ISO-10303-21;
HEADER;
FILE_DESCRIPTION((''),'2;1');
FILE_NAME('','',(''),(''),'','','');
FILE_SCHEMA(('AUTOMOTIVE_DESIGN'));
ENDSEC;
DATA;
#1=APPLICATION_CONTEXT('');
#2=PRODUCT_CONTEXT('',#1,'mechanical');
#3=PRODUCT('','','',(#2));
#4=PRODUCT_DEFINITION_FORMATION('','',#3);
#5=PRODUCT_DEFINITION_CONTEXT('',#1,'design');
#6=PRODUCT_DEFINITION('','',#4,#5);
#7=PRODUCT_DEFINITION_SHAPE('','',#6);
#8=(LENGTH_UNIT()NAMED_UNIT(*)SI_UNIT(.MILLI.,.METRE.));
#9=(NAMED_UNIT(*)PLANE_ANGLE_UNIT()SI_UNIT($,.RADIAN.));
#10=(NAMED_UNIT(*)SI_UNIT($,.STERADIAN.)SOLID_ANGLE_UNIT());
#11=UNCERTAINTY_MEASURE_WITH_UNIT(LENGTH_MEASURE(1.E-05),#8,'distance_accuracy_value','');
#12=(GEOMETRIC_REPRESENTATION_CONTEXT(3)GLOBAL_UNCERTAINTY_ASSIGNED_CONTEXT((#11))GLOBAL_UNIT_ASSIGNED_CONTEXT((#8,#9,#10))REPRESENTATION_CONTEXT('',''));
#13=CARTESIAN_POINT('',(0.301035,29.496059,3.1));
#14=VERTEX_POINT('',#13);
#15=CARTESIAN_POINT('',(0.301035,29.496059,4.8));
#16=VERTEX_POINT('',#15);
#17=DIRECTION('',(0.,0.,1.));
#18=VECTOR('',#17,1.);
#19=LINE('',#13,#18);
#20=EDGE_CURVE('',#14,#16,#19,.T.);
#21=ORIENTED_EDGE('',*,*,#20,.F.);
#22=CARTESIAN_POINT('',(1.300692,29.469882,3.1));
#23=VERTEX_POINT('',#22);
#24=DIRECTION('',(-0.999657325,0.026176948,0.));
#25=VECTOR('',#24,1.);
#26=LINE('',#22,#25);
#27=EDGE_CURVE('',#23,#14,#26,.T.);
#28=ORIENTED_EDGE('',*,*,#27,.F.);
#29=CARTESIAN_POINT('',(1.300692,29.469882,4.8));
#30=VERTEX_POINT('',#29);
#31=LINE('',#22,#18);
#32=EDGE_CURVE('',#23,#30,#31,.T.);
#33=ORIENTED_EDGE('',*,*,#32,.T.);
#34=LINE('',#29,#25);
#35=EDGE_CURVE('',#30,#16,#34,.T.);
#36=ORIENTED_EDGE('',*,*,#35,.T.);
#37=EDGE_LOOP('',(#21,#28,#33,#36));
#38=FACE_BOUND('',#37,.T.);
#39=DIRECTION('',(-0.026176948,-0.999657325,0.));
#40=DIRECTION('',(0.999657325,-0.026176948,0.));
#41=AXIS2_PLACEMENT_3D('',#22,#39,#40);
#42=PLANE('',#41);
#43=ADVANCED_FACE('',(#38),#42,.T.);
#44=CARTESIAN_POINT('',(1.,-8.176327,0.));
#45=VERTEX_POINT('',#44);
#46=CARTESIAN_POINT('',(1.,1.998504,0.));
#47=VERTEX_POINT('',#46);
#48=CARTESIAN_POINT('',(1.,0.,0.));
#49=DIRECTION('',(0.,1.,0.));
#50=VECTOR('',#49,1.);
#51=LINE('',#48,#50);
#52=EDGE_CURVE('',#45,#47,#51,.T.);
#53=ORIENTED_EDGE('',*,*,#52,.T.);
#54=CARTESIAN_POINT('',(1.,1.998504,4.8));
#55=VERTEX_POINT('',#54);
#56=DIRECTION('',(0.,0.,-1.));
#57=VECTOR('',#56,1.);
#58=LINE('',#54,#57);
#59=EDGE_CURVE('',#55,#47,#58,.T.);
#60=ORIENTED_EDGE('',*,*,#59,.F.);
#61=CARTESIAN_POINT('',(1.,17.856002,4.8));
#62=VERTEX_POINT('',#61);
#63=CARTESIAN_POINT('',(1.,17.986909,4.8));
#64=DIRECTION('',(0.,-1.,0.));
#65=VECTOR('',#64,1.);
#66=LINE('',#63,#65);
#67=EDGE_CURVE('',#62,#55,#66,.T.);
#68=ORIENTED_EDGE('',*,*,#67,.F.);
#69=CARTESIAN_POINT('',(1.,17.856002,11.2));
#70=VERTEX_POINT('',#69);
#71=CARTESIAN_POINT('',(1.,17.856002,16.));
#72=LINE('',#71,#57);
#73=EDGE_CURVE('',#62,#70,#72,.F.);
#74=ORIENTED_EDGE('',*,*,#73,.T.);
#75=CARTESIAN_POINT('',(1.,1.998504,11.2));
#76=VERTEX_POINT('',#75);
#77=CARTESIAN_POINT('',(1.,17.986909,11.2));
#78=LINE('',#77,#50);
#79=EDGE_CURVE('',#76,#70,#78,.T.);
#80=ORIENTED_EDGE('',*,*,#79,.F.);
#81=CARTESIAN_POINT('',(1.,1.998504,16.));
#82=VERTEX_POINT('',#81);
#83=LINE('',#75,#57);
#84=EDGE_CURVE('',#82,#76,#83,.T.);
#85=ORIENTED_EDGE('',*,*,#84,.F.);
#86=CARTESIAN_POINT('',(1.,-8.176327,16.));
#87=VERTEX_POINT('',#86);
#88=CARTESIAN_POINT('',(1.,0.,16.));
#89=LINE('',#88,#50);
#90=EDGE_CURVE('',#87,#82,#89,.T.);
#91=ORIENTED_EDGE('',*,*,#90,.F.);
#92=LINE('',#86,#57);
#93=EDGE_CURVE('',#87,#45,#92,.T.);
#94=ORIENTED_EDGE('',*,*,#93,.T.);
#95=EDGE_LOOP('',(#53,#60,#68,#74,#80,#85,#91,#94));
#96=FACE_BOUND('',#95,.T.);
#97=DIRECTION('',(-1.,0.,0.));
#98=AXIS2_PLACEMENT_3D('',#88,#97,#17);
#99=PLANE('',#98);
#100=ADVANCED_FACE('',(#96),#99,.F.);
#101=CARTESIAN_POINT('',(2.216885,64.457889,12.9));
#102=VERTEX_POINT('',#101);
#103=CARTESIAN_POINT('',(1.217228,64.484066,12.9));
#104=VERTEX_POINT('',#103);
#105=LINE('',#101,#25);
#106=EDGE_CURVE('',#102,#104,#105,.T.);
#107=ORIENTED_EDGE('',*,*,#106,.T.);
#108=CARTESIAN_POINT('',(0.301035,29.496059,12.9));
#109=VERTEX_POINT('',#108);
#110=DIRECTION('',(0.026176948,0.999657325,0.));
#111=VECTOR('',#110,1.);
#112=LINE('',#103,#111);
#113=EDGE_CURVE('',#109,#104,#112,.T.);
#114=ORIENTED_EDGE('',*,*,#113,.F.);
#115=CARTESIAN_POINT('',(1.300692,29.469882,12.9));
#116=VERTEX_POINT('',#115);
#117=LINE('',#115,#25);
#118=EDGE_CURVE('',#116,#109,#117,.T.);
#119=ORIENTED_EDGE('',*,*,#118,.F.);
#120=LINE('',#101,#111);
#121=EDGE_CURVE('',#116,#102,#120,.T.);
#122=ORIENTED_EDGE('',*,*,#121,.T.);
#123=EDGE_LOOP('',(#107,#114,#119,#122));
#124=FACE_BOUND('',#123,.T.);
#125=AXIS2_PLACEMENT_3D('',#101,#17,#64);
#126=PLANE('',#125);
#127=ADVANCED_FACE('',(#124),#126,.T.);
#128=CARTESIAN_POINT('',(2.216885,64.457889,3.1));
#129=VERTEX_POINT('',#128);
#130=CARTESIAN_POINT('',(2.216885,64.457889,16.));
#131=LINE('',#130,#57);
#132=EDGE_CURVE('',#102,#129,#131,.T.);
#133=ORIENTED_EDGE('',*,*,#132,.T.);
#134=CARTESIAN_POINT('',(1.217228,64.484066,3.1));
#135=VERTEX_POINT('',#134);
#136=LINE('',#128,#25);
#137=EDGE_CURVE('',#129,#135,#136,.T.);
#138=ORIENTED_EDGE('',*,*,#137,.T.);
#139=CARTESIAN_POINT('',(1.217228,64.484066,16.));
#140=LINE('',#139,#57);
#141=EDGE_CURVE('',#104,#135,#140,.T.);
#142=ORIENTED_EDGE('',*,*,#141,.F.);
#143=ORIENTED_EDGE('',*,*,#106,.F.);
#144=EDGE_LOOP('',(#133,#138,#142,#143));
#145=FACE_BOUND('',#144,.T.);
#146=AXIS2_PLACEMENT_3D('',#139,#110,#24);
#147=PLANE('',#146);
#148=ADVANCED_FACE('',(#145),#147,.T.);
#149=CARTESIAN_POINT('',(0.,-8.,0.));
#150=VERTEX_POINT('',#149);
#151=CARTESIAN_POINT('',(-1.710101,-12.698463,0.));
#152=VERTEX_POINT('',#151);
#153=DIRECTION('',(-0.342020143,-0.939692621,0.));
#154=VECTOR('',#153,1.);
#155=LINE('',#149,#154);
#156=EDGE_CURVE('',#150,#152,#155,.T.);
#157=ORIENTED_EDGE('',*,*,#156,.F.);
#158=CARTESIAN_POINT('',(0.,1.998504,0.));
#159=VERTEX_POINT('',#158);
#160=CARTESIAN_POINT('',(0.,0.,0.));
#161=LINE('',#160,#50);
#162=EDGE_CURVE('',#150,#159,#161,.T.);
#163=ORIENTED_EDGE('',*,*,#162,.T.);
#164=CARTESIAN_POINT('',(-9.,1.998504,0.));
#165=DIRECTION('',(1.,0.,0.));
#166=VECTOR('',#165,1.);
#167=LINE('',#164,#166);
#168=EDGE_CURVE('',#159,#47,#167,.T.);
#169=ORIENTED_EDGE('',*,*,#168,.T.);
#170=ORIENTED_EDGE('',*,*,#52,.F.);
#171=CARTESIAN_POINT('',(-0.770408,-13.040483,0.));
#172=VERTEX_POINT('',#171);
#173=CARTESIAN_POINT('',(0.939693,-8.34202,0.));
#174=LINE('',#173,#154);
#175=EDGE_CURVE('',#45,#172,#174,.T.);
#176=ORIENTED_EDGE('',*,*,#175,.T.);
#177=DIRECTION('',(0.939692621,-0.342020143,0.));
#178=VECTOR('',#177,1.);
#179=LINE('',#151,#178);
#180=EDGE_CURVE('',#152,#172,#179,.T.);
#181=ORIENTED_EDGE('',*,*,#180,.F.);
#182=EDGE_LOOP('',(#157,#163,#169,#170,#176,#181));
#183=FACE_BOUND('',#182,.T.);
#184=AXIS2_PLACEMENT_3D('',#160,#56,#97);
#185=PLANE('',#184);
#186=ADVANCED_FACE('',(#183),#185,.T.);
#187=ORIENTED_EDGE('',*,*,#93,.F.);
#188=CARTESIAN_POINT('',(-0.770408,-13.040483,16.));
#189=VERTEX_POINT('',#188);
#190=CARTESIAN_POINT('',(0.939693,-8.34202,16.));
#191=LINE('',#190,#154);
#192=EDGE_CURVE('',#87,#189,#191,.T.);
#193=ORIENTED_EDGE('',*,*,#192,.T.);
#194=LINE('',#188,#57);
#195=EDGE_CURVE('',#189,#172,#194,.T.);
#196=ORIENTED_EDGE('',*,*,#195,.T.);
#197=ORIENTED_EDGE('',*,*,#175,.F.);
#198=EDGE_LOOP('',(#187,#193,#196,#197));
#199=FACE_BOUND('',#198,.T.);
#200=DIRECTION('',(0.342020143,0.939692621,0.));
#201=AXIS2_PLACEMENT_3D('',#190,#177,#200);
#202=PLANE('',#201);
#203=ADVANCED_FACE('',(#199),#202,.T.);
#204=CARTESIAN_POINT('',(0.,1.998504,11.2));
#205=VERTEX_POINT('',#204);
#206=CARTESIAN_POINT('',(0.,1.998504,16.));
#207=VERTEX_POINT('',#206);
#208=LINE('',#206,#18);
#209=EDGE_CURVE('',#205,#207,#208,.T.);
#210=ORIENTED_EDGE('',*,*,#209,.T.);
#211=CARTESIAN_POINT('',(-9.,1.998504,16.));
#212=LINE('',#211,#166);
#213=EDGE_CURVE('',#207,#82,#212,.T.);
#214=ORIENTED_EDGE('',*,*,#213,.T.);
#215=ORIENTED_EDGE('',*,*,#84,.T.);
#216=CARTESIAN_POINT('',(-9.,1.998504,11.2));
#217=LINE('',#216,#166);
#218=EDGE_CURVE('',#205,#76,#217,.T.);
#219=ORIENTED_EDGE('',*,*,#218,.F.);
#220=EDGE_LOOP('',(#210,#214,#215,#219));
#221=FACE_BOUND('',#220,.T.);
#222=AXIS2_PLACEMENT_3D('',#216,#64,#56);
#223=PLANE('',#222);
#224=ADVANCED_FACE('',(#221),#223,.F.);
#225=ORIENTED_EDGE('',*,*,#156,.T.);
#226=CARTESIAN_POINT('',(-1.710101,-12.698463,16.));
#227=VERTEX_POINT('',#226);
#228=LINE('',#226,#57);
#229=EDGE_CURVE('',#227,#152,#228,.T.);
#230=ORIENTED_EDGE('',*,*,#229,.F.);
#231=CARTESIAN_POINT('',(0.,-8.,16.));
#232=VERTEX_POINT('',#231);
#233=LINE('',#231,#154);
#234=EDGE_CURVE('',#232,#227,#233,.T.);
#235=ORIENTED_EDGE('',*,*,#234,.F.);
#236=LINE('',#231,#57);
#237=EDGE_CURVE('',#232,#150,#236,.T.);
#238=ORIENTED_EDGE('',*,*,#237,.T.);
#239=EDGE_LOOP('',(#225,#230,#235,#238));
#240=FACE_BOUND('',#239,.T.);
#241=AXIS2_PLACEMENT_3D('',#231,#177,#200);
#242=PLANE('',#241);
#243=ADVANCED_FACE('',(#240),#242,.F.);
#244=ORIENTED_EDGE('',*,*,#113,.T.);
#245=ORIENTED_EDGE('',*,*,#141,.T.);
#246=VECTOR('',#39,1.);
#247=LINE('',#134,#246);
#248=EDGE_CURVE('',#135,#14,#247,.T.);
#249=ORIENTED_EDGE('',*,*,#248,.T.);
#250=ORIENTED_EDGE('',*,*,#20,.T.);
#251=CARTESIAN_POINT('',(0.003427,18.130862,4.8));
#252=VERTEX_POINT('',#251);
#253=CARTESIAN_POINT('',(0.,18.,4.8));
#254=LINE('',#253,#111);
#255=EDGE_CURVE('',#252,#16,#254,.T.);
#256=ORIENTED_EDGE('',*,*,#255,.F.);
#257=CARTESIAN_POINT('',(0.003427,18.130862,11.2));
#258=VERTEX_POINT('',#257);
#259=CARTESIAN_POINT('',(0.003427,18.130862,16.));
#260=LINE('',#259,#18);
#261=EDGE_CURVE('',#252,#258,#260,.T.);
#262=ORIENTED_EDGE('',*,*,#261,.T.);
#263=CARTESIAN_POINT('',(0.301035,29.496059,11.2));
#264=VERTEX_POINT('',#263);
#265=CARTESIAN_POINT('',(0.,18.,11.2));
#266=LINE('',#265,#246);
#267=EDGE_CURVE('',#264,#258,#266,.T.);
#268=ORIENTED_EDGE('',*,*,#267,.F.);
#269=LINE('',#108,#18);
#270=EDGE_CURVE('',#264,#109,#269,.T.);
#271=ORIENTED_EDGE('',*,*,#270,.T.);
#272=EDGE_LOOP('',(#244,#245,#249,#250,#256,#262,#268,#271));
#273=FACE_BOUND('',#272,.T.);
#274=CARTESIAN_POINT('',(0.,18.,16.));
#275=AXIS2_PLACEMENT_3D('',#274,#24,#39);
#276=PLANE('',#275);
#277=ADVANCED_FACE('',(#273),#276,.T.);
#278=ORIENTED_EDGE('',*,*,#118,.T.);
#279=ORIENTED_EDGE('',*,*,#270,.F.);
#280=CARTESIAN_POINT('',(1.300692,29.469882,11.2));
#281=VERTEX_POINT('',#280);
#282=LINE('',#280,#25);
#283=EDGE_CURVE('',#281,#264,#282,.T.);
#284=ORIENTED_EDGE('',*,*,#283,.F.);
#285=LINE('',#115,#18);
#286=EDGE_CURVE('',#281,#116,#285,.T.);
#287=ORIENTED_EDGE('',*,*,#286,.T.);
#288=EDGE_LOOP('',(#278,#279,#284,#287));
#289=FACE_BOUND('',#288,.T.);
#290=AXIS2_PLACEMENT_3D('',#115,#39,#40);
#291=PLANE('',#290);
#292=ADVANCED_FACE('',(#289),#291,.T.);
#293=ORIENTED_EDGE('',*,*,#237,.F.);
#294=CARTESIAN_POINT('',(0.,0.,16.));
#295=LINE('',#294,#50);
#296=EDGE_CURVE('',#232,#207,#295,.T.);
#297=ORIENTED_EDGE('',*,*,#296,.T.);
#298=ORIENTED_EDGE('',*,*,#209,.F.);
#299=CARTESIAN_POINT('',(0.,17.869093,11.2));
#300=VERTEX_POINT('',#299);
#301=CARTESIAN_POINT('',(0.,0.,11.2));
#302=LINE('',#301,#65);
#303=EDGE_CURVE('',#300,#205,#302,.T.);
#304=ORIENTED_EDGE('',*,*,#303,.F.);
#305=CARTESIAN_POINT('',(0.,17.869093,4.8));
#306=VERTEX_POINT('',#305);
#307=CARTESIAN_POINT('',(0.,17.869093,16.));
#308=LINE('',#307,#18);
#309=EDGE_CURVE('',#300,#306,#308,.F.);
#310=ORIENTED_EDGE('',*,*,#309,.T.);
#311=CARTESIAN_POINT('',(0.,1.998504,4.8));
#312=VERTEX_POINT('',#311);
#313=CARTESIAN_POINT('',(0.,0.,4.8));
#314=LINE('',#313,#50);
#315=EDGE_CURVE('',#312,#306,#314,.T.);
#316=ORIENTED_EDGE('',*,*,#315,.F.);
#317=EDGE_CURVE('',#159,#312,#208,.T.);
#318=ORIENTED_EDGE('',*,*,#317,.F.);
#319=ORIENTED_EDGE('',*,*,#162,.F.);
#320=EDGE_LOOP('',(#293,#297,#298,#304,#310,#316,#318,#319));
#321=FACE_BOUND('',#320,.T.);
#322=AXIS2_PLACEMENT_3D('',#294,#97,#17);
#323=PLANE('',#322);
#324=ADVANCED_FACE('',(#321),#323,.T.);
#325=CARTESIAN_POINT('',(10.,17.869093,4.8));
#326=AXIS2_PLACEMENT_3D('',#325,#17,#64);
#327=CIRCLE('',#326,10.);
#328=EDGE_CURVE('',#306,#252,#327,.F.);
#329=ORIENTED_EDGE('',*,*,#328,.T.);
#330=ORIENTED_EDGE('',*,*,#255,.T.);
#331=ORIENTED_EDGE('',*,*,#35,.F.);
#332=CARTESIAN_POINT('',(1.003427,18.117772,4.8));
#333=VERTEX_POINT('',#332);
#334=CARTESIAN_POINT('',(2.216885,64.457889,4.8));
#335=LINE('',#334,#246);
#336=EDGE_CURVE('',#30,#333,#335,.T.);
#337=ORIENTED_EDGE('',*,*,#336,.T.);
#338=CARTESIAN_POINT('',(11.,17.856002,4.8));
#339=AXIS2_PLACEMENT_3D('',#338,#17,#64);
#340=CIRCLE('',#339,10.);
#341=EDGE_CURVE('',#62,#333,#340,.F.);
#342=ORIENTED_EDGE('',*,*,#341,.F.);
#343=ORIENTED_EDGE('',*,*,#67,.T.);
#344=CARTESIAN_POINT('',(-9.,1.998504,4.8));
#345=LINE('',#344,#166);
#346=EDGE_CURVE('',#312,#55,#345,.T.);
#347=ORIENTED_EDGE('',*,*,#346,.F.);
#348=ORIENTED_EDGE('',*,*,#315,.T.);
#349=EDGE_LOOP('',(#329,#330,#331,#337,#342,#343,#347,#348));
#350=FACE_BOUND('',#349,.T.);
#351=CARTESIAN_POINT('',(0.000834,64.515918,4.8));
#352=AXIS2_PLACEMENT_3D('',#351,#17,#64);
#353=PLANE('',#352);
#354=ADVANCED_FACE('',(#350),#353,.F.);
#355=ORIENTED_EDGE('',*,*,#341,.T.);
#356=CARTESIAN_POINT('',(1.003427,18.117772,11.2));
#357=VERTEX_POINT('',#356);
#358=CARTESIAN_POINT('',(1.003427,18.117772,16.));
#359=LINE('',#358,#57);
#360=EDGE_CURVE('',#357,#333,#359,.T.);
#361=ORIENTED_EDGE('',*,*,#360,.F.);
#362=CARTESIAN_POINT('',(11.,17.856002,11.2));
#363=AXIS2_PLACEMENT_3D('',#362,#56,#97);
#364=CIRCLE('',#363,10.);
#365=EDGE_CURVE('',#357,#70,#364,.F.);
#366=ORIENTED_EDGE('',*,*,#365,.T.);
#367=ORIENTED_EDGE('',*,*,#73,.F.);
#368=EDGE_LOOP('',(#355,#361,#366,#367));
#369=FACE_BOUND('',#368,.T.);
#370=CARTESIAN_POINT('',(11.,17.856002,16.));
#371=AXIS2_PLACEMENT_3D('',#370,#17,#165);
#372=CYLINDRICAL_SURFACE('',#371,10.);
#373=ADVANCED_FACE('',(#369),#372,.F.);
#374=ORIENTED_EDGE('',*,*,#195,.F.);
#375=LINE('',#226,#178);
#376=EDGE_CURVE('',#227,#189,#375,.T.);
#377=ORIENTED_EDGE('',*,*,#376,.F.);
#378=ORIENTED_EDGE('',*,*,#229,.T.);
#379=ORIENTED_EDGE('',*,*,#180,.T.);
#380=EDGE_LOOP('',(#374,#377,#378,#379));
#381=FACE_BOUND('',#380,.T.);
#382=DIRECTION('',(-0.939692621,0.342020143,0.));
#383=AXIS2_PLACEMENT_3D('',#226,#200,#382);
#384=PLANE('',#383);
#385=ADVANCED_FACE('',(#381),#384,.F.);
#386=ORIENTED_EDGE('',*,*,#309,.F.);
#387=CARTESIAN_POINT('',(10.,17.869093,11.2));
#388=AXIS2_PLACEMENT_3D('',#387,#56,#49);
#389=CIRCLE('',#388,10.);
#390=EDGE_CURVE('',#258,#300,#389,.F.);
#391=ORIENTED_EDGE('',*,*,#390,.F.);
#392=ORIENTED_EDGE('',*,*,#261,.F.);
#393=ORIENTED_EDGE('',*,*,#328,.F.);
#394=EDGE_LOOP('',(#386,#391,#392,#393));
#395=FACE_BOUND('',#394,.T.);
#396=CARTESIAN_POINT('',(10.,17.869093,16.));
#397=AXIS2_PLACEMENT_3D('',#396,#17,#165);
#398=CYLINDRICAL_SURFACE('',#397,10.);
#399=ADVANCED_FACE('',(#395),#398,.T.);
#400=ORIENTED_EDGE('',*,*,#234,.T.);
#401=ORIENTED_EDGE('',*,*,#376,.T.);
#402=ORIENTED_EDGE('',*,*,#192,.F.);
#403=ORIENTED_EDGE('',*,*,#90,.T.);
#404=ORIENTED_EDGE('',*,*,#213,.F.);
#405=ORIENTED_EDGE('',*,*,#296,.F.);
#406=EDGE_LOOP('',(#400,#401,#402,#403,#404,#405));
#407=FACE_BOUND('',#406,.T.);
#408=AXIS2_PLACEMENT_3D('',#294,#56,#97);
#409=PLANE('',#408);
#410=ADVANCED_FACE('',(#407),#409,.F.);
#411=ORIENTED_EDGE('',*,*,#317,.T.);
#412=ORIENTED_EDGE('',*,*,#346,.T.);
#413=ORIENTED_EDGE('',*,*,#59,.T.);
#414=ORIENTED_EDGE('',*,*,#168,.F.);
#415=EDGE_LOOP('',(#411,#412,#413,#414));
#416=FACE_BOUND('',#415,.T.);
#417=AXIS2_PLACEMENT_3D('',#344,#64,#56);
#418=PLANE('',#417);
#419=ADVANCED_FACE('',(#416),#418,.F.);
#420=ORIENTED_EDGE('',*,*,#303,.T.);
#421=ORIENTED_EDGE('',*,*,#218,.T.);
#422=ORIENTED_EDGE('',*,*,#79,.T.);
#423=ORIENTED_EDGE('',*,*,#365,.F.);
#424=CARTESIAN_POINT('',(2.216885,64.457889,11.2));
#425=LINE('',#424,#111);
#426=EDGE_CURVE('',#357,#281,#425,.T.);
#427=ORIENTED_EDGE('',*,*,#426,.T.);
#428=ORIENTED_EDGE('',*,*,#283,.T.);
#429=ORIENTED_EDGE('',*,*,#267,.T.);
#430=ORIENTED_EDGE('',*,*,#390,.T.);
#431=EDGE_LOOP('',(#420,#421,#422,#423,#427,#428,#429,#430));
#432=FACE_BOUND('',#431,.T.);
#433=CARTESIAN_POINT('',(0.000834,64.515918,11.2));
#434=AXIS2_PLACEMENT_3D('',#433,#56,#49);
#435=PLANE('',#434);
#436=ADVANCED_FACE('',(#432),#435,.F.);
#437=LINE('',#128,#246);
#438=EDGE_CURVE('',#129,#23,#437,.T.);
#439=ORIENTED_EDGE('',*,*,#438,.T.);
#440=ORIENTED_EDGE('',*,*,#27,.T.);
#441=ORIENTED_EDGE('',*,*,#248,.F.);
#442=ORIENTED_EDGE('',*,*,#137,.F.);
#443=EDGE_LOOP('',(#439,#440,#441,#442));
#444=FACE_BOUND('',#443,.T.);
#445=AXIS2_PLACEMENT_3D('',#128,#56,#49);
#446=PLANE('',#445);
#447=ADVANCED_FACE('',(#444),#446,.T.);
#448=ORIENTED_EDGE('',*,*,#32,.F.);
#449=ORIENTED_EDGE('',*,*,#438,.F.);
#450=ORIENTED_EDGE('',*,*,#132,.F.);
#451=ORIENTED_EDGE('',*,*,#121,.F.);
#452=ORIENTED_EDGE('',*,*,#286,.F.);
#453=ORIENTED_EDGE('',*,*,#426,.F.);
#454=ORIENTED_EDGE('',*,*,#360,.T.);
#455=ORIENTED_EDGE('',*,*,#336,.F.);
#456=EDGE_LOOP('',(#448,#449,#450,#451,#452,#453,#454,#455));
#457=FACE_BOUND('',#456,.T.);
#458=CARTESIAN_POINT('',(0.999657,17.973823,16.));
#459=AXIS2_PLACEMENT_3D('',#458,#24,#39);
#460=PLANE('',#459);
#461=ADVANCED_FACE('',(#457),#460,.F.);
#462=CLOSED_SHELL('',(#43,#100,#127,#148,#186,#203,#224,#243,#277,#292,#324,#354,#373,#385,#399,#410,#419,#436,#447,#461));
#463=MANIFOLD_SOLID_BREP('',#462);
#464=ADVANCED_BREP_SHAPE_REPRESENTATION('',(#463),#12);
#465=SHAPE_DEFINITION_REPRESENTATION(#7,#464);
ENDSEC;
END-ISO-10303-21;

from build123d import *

# Parameters (mm, degrees)
EXTRUDE_2_DEPTH      = 16
SKETCH_31_W          = 4.8
SKETCH_31_H          = 46.486909283
CUT_EXTRUDE_6_DEPTH  = 67.474283586
SKETCH_32_W          = 4.8
SKETCH_32_H          = 14.308405558
CUT_EXTRUDE_7_DEPTH  = 16
FILLET_1_R           = 10
FILLET_2_R           = 10
SKETCH_39_W          = 1.7
SKETCH_39_H          = 35
EXTRUDE_1_DEPTH      = 1
SKETCH_40_W          = 1
SKETCH_40_H          = 4.8
CUT_EXTRUDE_8_DEPTH  = 10
SKETCH_41_W          = 3.264842031
SKETCH_41_H          = 6.457557915
CUT_EXTRUDE_9_DEPTH  = 10
SKETCH_42_W          = 4.8
SKETCH_42_H          = 1.68
CUT_EXTRUDE_10_DEPTH = 10
EXTRUDE_3_DEPTH      = 16


with BuildPart() as part:
    # 草图28 → 拉伸-薄壁2 (new body)
    with BuildSketch(Plane.XY):
        Polygon((0, 0), (0, 18), (1.217228096, 64.484065611), (2.216885421, 64.457888663), (1, 17.986909283), (1, 0), align=None)
    extrude(amount=EXTRUDE_2_DEPTH)

    # 草图31 → 切除-拉伸6 (cut, through all)
    with BuildSketch(Plane(origin=(0.528633719, -0.013842761, 0), x_dir=(0, 0, -1), z_dir=(0.9996573249755574, -0.02617694830787331, 0))):
        with Locations((-13.6, 41.250377209)):
            Rectangle(SKETCH_31_W, SKETCH_31_H)
        with Locations((-2.4, 41.250377209)):
            Rectangle(SKETCH_31_W, SKETCH_31_H)
    extrude(amount=-CUT_EXTRUDE_6_DEPTH, mode=Mode.SUBTRACT)

    # 草图32 → 切除-拉伸7 (cut)
    with BuildSketch(Plane(origin=(1, 0, 0), x_dir=(0, 0, -1), z_dir=(1, 0, 0))):
        with Locations((-13.6, 10.832706504)):
            Rectangle(SKETCH_32_W, SKETCH_32_H)
        with Locations((-2.4, 10.832706504)):
            Rectangle(SKETCH_32_W, SKETCH_32_H)
    extrude(amount=-CUT_EXTRUDE_7_DEPTH, mode=Mode.SUBTRACT)

    # 圆角1
    # the kernel refuses this fillet: 10 mm, written as the material it takes off along each edge
    with BuildSketch(Plane(origin=(0, 18, -0.327267927), x_dir=(0, -1, 0), z_dir=(0, 0, 1))) as fillet_1_piece_1:
        with BuildLine():
            CenterArc((FILLET_1_R * 0.0130907170848, FILLET_1_R), FILLET_1_R, 268.5, 1.5)
            Line((-FILLET_1_R * 0.013086231223, FILLET_1_R * 0.000342675024443), (0, 0))
            Line((0, 0), (FILLET_1_R * 0.0130907170848, 0))
        make_face()
    extrude(amount=16.654535854, mode=Mode.SUBTRACT)

    # 圆角2
    # the kernel refuses this fillet: 10 mm, written as the material it adds along each edge
    with BuildSketch(Plane(origin=(1, 17.986909283, 4.8), x_dir=(0, -1, 0), z_dir=(0, 0, 1))) as fillet_2_piece_1:
        with BuildLine():
            CenterArc((FILLET_2_R * 0.0130907170848, FILLET_2_R), FILLET_2_R, 268.5, 1.5)
            Line((-FILLET_2_R * 0.013086231223, FILLET_2_R * 0.000342675024443), (0, 0))
            Line((0, 0), (FILLET_2_R * 0.0130907170848, 0))
        make_face()
    extrude(amount=6.4)

    # 草图39 → 凸台-拉伸1 (add)
    with BuildSketch(Plane(origin=(-0.471023606, 0.012334187, 0), x_dir=(0, 0, 1), z_dir=(-0.9996573249755574, 0.026176948307873305, 0))):
        with Locations((12.05, 46.99383185)):
            Rectangle(SKETCH_39_W, SKETCH_39_H)
        with Locations((3.95, 46.99383185)):
            Rectangle(SKETCH_39_W, SKETCH_39_H)
    extrude(amount=-EXTRUDE_1_DEPTH)

    # 草图40 → 切除-拉伸8 (cut)
    with BuildSketch(Plane(origin=(0.471366281, 18.000752044, 0), x_dir=(0.9996573249755574, -0.02617694830787331, 0), z_dir=(0.02617694830787331, 0.9996573249755574, 0))):
        with Locations((0.02881493, -13.6)):
            Rectangle(SKETCH_40_W, SKETCH_40_H)
    extrude(amount=-CUT_EXTRUDE_8_DEPTH, mode=Mode.SUBTRACT)

    # 草图41 → 切除-拉伸9 (cut)
    with BuildSketch(Plane(origin=(0.471366281, 18.000752044, 0), x_dir=(0.9996573249755574, -0.02617694830787331, 0), z_dir=(0.02617694830787331, 0.9996573249755574, 0))):
        with Locations((-1.103606086, -1.571221043)):
            Rectangle(SKETCH_41_W, SKETCH_41_H)
    extrude(amount=-CUT_EXTRUDE_9_DEPTH, mode=Mode.SUBTRACT)

    # 草图42 → 切除-拉伸10 (cut)
    with BuildSketch(Plane(origin=(1, 0, 0), x_dir=(0, 0, -1), z_dir=(1, 0, 0))):
        with Locations((-2.4, 2.838503725)):
            Rectangle(SKETCH_42_W, SKETCH_42_H)
        with Locations((-13.6, 2.838503725)):
            Rectangle(SKETCH_42_W, SKETCH_42_H)
    extrude(amount=-CUT_EXTRUDE_10_DEPTH, mode=Mode.SUBTRACT)

    # 草图44 → 拉伸-薄壁3 (add)
    with BuildSketch(Plane(origin=(0, 0, 0), x_dir=(-1, 0, 0), z_dir=(0, 0, -1))):
        Polygon((0, 0), (0, -8), (1.710100717, -12.698463104), (0.770408096, -13.040483247), (-1, -8.176326981), (-1, 0), align=None)
    extrude(amount=-EXTRUDE_3_DEPTH)


solid = part.part
